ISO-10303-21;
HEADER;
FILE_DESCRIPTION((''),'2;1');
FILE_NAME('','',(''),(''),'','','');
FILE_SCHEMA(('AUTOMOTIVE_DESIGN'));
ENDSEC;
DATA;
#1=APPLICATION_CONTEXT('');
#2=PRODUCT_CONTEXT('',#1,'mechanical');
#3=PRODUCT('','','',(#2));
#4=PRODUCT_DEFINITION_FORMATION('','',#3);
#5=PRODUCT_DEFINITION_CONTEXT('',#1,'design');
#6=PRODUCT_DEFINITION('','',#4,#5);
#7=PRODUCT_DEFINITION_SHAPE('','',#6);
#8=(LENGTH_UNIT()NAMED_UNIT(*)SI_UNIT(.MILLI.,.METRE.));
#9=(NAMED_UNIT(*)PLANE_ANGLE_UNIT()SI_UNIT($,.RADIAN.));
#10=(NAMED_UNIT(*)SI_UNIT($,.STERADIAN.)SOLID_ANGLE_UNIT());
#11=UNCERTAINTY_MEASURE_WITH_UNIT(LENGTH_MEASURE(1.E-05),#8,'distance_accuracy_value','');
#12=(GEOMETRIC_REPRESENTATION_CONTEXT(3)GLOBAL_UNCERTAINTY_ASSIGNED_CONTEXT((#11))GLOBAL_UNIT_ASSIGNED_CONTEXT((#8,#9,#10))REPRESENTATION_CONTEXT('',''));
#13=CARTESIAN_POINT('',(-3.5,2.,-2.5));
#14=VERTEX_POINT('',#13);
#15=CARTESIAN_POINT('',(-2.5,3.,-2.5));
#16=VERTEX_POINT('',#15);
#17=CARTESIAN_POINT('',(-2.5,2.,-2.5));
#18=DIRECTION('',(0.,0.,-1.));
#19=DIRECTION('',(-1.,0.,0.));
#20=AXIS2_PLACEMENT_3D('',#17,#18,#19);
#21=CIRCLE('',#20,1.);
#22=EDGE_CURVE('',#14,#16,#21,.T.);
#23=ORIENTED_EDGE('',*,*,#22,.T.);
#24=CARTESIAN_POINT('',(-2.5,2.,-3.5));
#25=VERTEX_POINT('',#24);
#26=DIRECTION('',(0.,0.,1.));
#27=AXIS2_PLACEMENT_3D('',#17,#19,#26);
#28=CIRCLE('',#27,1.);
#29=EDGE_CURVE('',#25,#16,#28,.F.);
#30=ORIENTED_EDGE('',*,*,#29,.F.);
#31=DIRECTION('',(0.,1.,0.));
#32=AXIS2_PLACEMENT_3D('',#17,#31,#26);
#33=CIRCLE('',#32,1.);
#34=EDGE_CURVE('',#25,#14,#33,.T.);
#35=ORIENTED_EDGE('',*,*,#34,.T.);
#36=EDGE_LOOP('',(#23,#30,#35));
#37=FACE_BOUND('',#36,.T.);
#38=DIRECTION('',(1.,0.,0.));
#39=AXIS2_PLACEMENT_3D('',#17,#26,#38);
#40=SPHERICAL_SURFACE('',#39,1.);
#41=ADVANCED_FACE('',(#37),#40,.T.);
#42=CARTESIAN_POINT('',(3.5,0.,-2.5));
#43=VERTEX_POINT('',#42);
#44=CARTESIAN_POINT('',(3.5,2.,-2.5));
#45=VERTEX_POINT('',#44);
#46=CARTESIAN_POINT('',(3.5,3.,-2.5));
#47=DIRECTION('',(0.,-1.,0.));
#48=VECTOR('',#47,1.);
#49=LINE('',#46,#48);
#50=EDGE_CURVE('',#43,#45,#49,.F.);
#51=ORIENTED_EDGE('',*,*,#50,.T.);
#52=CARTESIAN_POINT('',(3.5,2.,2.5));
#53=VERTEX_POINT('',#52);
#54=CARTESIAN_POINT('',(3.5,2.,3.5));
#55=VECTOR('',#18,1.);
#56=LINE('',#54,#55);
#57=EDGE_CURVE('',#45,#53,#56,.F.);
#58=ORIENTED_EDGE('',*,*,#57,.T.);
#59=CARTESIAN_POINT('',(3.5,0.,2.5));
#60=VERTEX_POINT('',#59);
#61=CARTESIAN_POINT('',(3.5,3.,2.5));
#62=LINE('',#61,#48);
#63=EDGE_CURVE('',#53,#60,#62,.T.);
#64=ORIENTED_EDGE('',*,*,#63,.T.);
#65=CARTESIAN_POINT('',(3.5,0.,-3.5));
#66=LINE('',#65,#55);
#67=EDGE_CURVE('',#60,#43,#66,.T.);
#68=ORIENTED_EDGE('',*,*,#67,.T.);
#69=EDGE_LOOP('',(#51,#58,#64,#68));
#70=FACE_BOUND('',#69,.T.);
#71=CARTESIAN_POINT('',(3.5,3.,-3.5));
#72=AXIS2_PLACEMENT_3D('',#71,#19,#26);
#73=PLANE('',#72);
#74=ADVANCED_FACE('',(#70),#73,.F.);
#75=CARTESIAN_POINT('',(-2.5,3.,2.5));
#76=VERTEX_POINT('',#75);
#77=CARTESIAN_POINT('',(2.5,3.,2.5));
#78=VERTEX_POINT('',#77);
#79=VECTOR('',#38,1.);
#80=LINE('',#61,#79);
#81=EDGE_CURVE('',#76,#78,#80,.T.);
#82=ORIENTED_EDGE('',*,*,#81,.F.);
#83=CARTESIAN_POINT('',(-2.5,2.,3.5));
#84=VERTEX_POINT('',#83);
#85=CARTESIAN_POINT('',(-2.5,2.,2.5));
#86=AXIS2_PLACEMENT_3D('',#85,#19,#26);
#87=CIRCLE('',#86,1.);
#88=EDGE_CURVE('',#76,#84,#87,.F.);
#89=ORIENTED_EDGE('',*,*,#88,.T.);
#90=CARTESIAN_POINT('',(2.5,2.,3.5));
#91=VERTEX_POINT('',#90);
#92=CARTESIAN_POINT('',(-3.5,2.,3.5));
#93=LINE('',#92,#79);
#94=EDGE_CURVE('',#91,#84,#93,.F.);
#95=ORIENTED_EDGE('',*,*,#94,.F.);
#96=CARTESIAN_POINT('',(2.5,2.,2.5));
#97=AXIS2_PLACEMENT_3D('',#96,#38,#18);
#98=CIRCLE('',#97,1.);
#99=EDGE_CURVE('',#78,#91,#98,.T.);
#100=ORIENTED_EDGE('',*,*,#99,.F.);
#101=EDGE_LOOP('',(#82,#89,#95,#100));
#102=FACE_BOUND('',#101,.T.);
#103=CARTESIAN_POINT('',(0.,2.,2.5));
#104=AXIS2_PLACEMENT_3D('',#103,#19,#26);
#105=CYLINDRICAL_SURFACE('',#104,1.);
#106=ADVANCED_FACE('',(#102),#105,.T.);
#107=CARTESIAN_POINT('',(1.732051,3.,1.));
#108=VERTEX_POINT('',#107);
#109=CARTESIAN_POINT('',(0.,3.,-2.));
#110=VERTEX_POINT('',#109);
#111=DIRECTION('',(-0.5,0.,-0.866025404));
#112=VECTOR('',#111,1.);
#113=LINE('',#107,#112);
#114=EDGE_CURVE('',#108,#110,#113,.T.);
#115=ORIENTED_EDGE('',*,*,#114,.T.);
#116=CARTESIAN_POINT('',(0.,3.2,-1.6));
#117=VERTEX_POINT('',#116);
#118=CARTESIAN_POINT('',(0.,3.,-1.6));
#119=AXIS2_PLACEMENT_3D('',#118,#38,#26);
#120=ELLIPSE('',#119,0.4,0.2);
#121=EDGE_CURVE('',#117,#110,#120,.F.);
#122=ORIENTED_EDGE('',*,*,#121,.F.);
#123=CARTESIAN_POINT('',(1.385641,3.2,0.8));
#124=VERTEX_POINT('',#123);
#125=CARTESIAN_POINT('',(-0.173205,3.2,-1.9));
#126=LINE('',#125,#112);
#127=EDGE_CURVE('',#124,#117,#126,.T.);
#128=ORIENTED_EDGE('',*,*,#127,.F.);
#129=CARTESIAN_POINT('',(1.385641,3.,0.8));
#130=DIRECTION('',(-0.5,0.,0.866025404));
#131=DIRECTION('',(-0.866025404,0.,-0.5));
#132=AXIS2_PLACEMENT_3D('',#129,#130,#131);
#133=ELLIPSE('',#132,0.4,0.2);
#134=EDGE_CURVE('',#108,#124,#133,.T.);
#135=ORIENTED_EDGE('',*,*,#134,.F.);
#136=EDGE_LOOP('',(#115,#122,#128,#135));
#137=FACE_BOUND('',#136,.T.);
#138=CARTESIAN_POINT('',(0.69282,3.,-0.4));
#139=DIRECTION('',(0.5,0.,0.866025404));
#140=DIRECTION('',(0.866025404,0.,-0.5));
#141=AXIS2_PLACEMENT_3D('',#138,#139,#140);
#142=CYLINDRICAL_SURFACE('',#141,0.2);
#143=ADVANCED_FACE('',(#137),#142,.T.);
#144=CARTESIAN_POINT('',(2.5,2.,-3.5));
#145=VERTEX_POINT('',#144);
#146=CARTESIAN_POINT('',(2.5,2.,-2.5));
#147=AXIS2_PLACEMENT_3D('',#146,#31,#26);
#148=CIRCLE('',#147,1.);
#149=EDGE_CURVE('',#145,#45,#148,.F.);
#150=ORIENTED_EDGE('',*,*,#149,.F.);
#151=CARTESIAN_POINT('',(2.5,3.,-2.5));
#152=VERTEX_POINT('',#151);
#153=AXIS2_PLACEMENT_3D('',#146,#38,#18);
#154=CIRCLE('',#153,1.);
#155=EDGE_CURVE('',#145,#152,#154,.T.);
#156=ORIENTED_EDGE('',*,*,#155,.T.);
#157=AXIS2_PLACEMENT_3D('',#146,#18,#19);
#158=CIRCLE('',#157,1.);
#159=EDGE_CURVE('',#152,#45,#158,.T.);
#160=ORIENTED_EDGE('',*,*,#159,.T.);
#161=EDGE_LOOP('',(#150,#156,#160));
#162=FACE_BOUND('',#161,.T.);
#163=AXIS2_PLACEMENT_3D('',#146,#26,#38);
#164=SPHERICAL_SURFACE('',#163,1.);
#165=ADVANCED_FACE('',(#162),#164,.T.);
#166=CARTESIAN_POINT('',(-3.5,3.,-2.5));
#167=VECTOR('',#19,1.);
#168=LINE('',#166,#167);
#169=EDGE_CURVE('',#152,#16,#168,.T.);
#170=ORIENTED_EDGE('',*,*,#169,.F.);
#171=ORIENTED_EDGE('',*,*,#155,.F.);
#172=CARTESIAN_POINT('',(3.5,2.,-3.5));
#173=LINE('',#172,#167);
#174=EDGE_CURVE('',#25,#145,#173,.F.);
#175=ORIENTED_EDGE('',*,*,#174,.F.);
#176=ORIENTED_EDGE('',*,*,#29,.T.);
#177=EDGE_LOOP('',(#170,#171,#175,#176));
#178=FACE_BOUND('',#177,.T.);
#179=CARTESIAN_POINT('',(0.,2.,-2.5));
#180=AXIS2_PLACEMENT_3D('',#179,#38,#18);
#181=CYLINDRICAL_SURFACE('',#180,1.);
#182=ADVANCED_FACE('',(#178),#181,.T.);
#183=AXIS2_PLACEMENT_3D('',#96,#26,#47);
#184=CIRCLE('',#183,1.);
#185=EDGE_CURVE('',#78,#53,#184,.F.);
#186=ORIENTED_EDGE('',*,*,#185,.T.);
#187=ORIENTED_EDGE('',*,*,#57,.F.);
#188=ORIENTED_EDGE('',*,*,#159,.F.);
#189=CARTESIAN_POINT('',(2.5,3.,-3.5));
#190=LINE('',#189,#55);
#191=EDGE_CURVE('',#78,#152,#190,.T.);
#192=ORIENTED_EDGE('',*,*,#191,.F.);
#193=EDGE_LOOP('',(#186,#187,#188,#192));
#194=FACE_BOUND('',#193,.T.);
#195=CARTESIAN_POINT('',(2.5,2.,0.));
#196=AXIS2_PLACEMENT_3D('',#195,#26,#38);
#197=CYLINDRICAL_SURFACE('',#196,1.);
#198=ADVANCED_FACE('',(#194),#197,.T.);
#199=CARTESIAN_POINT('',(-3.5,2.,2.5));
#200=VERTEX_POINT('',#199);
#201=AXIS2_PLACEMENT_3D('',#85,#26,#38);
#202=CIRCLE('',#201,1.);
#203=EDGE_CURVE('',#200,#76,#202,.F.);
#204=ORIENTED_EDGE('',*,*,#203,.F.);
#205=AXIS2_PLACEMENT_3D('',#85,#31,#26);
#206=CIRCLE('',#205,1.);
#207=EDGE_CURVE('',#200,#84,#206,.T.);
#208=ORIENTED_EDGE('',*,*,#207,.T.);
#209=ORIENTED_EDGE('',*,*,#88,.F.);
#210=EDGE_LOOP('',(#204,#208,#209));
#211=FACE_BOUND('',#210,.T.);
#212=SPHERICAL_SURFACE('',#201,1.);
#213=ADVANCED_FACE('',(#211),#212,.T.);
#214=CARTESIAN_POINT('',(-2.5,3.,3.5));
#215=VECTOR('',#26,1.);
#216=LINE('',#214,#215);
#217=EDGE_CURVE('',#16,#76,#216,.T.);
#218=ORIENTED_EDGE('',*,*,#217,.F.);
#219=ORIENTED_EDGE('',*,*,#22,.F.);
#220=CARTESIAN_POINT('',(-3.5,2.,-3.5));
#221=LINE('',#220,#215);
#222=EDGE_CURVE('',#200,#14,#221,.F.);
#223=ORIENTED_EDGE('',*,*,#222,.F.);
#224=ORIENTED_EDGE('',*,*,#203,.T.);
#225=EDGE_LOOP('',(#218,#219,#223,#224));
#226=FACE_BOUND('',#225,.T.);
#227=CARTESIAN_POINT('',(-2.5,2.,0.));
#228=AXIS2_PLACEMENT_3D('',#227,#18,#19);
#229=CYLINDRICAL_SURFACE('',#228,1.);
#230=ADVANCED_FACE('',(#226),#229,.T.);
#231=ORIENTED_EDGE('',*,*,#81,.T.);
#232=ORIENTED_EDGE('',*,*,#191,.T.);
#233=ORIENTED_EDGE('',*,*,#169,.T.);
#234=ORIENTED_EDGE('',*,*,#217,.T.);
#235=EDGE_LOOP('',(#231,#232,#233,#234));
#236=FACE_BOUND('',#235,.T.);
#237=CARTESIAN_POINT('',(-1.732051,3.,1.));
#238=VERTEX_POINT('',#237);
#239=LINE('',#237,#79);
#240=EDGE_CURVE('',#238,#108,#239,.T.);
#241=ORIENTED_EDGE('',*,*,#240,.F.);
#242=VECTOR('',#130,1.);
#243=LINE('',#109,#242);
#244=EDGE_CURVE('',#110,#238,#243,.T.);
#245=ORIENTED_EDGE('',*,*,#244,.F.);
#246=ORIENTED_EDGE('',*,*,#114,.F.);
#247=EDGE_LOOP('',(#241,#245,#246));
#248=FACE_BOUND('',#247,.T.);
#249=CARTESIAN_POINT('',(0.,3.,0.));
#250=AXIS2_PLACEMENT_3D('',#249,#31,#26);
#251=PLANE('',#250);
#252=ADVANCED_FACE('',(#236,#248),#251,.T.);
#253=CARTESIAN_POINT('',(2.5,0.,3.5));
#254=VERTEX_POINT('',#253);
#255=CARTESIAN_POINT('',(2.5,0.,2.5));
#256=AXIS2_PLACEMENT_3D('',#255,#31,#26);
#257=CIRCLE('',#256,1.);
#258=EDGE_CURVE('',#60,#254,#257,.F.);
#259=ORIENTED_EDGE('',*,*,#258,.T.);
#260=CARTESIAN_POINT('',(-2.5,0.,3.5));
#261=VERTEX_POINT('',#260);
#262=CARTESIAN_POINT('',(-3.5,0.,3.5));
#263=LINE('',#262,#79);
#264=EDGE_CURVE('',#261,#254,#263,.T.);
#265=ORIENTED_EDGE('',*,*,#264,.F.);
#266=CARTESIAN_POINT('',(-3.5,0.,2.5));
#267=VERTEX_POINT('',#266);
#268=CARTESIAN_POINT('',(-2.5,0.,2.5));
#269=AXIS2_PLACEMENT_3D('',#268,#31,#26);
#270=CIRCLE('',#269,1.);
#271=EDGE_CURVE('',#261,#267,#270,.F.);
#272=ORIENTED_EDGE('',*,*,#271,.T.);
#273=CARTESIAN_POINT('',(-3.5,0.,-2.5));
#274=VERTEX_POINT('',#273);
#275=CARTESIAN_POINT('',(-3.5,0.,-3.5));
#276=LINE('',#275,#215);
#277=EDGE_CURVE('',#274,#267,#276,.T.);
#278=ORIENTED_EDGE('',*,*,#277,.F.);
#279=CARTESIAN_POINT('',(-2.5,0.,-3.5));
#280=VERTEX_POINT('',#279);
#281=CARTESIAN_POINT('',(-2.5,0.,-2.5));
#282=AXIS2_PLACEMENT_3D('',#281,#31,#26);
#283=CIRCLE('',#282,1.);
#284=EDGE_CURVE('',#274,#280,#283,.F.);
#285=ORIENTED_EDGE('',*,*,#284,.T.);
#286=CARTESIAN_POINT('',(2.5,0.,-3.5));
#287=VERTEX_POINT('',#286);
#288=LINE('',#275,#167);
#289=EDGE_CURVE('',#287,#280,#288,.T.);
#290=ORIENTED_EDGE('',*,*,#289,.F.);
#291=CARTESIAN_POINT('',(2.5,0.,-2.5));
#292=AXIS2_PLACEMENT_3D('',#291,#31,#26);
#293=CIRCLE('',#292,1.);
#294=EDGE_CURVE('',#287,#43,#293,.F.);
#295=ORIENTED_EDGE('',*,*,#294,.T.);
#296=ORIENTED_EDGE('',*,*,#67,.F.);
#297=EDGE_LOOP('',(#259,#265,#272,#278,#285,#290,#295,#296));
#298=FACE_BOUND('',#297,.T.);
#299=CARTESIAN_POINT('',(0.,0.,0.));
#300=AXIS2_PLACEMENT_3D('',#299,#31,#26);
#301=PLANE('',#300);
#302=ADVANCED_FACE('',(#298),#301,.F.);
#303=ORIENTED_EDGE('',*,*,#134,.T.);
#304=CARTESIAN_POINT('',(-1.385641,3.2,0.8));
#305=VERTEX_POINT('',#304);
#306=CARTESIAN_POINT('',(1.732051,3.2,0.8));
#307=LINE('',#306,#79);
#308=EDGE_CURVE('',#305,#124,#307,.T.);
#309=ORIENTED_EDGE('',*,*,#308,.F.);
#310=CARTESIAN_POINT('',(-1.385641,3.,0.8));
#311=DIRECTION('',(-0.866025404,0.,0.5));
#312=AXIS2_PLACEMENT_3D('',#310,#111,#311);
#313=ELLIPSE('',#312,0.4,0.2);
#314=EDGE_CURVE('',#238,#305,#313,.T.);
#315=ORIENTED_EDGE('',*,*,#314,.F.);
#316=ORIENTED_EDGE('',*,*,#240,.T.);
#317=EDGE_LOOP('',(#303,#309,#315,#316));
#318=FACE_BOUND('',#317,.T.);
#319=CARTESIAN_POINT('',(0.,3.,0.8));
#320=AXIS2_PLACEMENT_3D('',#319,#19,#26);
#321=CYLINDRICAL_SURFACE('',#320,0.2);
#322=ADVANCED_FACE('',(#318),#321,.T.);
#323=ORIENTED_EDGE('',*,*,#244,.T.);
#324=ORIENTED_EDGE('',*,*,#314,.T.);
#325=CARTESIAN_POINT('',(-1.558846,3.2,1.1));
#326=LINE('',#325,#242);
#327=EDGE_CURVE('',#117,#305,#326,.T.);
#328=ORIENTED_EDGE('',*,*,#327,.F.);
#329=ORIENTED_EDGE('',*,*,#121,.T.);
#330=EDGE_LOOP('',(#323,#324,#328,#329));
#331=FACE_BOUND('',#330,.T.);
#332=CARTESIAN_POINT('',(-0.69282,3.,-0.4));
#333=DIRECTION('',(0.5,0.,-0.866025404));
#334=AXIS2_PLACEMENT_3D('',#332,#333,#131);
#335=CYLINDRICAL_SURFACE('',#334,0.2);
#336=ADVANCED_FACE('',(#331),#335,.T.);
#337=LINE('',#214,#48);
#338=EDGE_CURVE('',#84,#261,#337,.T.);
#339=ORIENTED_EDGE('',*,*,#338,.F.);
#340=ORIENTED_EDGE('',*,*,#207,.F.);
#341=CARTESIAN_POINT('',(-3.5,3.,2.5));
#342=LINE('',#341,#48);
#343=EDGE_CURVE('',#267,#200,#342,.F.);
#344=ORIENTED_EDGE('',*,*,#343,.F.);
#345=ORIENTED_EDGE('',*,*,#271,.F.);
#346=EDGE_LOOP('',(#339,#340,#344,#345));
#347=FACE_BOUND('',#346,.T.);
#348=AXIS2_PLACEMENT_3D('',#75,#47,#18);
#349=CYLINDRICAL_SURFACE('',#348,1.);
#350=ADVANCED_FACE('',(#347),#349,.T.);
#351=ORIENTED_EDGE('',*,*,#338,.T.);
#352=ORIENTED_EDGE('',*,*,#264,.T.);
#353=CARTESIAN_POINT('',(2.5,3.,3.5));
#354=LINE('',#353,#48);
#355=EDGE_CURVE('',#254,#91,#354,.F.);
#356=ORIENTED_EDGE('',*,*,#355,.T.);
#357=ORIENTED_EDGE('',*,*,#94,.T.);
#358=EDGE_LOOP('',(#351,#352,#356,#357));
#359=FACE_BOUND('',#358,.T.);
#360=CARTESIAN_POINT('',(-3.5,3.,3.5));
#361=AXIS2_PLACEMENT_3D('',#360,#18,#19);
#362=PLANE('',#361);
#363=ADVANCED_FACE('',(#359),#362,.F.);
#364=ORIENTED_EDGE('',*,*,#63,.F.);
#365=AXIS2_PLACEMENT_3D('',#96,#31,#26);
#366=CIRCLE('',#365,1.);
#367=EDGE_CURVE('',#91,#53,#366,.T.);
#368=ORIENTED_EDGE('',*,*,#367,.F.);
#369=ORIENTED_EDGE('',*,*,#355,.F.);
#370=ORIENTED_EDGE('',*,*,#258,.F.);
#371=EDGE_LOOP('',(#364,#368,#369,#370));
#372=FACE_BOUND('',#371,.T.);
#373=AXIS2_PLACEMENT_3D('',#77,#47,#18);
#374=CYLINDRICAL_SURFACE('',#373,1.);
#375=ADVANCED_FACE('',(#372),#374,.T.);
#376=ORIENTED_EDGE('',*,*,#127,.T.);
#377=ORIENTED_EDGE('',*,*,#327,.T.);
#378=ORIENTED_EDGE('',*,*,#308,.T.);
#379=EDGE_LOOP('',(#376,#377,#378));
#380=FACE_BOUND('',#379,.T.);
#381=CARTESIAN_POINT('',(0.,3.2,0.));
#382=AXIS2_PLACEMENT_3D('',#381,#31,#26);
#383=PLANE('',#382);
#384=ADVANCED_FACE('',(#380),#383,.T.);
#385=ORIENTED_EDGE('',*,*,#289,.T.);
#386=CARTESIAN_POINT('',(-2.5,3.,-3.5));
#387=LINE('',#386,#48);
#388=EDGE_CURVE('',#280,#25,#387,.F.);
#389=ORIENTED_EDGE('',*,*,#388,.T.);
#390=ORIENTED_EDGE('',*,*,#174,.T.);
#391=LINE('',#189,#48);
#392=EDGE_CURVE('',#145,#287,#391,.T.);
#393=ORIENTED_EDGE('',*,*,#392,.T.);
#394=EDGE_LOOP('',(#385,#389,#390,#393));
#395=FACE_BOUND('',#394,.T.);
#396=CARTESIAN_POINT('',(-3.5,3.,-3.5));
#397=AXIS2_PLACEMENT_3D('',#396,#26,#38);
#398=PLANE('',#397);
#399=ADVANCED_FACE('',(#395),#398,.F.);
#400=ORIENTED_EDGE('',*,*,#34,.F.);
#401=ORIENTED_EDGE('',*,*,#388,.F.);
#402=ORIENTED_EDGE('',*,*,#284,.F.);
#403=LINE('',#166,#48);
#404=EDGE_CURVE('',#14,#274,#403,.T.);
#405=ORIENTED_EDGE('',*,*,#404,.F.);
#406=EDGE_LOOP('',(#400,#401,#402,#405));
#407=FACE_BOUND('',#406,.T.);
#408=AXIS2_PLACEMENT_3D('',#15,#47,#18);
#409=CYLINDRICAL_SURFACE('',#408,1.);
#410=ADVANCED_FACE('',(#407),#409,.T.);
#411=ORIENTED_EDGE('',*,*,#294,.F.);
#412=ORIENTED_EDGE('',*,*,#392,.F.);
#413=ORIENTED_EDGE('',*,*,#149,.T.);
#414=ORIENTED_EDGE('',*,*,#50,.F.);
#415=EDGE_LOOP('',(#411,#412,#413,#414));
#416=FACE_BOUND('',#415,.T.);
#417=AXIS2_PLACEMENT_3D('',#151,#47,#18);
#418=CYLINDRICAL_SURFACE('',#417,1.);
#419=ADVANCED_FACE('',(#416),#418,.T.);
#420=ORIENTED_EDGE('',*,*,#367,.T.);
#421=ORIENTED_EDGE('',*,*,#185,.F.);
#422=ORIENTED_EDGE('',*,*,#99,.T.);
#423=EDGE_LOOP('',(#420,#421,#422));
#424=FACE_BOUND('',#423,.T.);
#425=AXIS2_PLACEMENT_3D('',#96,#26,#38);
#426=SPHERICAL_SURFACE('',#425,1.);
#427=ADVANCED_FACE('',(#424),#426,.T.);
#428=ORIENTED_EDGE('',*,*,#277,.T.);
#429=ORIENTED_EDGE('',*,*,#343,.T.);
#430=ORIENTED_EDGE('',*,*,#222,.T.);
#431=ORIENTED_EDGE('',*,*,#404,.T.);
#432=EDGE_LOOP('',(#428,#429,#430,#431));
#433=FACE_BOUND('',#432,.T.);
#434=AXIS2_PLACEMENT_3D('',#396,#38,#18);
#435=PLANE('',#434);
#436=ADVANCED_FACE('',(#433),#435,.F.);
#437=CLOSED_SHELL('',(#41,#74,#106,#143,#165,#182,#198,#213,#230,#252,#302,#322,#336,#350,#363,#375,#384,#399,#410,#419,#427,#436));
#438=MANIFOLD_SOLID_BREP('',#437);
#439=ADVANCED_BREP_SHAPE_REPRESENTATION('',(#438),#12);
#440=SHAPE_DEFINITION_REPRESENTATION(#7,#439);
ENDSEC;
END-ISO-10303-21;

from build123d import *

# Parameters (mm, degrees)
SKETCH1_W           = 7
SKETCH1_H           = 7
BOSS_EXTRUDE1_DEPTH = 3
FILLET1_R           = 1
BOSS_EXTRUDE2_DEPTH = 0.2
FILLET2_R           = 0.2


with BuildPart() as part:
    # Sketch1 → Boss-Extrude1 (new body)
    with BuildSketch(Plane(origin=(0, 0, 0), x_dir=(1, 0, 0), z_dir=(0, 1, 0))):
        Rectangle(SKETCH1_W, SKETCH1_H)
    extrude(amount=BOSS_EXTRUDE1_DEPTH)

    # Fillet1
    fillet1_edges = [part.edges().sort_by_distance(p)[0] for p in [
        (-3.5, 3, 0),
        (0, 3, 3.5),
        (3.5, 3, 0),
        (0, 3, -3.5),
        (3.5, 1.5, 3.5),
        (-3.5, 1.5, 3.5),
        (-3.5, 1.5, -3.5),
        (3.5, 1.5, -3.5),
    ]]
    fillet(fillet1_edges, radius=FILLET1_R)

    # Sketch2 → Boss-Extrude2 (add)
    with BuildSketch(Plane(origin=(0, 3, 0), x_dir=(1, 0, 0), z_dir=(0, 1, 0))):
        Polygon((0, 2), (-1.732050808, -1), (1.732050808, -1), align=None)
    extrude(amount=BOSS_EXTRUDE2_DEPTH)

    # Fillet2
    fillet2_edges = [part.edges().sort_by_distance(p)[0] for p in [
        (-0.866025404, 3.2, -0.5),
        (0.866025404, 3.2, -0.5),
        (0, 3.2, 1),
    ]]
    fillet(fillet2_edges, radius=FILLET2_R - 0.0001)  # a hair under: the kernel refuses the full size


solid = part.part
